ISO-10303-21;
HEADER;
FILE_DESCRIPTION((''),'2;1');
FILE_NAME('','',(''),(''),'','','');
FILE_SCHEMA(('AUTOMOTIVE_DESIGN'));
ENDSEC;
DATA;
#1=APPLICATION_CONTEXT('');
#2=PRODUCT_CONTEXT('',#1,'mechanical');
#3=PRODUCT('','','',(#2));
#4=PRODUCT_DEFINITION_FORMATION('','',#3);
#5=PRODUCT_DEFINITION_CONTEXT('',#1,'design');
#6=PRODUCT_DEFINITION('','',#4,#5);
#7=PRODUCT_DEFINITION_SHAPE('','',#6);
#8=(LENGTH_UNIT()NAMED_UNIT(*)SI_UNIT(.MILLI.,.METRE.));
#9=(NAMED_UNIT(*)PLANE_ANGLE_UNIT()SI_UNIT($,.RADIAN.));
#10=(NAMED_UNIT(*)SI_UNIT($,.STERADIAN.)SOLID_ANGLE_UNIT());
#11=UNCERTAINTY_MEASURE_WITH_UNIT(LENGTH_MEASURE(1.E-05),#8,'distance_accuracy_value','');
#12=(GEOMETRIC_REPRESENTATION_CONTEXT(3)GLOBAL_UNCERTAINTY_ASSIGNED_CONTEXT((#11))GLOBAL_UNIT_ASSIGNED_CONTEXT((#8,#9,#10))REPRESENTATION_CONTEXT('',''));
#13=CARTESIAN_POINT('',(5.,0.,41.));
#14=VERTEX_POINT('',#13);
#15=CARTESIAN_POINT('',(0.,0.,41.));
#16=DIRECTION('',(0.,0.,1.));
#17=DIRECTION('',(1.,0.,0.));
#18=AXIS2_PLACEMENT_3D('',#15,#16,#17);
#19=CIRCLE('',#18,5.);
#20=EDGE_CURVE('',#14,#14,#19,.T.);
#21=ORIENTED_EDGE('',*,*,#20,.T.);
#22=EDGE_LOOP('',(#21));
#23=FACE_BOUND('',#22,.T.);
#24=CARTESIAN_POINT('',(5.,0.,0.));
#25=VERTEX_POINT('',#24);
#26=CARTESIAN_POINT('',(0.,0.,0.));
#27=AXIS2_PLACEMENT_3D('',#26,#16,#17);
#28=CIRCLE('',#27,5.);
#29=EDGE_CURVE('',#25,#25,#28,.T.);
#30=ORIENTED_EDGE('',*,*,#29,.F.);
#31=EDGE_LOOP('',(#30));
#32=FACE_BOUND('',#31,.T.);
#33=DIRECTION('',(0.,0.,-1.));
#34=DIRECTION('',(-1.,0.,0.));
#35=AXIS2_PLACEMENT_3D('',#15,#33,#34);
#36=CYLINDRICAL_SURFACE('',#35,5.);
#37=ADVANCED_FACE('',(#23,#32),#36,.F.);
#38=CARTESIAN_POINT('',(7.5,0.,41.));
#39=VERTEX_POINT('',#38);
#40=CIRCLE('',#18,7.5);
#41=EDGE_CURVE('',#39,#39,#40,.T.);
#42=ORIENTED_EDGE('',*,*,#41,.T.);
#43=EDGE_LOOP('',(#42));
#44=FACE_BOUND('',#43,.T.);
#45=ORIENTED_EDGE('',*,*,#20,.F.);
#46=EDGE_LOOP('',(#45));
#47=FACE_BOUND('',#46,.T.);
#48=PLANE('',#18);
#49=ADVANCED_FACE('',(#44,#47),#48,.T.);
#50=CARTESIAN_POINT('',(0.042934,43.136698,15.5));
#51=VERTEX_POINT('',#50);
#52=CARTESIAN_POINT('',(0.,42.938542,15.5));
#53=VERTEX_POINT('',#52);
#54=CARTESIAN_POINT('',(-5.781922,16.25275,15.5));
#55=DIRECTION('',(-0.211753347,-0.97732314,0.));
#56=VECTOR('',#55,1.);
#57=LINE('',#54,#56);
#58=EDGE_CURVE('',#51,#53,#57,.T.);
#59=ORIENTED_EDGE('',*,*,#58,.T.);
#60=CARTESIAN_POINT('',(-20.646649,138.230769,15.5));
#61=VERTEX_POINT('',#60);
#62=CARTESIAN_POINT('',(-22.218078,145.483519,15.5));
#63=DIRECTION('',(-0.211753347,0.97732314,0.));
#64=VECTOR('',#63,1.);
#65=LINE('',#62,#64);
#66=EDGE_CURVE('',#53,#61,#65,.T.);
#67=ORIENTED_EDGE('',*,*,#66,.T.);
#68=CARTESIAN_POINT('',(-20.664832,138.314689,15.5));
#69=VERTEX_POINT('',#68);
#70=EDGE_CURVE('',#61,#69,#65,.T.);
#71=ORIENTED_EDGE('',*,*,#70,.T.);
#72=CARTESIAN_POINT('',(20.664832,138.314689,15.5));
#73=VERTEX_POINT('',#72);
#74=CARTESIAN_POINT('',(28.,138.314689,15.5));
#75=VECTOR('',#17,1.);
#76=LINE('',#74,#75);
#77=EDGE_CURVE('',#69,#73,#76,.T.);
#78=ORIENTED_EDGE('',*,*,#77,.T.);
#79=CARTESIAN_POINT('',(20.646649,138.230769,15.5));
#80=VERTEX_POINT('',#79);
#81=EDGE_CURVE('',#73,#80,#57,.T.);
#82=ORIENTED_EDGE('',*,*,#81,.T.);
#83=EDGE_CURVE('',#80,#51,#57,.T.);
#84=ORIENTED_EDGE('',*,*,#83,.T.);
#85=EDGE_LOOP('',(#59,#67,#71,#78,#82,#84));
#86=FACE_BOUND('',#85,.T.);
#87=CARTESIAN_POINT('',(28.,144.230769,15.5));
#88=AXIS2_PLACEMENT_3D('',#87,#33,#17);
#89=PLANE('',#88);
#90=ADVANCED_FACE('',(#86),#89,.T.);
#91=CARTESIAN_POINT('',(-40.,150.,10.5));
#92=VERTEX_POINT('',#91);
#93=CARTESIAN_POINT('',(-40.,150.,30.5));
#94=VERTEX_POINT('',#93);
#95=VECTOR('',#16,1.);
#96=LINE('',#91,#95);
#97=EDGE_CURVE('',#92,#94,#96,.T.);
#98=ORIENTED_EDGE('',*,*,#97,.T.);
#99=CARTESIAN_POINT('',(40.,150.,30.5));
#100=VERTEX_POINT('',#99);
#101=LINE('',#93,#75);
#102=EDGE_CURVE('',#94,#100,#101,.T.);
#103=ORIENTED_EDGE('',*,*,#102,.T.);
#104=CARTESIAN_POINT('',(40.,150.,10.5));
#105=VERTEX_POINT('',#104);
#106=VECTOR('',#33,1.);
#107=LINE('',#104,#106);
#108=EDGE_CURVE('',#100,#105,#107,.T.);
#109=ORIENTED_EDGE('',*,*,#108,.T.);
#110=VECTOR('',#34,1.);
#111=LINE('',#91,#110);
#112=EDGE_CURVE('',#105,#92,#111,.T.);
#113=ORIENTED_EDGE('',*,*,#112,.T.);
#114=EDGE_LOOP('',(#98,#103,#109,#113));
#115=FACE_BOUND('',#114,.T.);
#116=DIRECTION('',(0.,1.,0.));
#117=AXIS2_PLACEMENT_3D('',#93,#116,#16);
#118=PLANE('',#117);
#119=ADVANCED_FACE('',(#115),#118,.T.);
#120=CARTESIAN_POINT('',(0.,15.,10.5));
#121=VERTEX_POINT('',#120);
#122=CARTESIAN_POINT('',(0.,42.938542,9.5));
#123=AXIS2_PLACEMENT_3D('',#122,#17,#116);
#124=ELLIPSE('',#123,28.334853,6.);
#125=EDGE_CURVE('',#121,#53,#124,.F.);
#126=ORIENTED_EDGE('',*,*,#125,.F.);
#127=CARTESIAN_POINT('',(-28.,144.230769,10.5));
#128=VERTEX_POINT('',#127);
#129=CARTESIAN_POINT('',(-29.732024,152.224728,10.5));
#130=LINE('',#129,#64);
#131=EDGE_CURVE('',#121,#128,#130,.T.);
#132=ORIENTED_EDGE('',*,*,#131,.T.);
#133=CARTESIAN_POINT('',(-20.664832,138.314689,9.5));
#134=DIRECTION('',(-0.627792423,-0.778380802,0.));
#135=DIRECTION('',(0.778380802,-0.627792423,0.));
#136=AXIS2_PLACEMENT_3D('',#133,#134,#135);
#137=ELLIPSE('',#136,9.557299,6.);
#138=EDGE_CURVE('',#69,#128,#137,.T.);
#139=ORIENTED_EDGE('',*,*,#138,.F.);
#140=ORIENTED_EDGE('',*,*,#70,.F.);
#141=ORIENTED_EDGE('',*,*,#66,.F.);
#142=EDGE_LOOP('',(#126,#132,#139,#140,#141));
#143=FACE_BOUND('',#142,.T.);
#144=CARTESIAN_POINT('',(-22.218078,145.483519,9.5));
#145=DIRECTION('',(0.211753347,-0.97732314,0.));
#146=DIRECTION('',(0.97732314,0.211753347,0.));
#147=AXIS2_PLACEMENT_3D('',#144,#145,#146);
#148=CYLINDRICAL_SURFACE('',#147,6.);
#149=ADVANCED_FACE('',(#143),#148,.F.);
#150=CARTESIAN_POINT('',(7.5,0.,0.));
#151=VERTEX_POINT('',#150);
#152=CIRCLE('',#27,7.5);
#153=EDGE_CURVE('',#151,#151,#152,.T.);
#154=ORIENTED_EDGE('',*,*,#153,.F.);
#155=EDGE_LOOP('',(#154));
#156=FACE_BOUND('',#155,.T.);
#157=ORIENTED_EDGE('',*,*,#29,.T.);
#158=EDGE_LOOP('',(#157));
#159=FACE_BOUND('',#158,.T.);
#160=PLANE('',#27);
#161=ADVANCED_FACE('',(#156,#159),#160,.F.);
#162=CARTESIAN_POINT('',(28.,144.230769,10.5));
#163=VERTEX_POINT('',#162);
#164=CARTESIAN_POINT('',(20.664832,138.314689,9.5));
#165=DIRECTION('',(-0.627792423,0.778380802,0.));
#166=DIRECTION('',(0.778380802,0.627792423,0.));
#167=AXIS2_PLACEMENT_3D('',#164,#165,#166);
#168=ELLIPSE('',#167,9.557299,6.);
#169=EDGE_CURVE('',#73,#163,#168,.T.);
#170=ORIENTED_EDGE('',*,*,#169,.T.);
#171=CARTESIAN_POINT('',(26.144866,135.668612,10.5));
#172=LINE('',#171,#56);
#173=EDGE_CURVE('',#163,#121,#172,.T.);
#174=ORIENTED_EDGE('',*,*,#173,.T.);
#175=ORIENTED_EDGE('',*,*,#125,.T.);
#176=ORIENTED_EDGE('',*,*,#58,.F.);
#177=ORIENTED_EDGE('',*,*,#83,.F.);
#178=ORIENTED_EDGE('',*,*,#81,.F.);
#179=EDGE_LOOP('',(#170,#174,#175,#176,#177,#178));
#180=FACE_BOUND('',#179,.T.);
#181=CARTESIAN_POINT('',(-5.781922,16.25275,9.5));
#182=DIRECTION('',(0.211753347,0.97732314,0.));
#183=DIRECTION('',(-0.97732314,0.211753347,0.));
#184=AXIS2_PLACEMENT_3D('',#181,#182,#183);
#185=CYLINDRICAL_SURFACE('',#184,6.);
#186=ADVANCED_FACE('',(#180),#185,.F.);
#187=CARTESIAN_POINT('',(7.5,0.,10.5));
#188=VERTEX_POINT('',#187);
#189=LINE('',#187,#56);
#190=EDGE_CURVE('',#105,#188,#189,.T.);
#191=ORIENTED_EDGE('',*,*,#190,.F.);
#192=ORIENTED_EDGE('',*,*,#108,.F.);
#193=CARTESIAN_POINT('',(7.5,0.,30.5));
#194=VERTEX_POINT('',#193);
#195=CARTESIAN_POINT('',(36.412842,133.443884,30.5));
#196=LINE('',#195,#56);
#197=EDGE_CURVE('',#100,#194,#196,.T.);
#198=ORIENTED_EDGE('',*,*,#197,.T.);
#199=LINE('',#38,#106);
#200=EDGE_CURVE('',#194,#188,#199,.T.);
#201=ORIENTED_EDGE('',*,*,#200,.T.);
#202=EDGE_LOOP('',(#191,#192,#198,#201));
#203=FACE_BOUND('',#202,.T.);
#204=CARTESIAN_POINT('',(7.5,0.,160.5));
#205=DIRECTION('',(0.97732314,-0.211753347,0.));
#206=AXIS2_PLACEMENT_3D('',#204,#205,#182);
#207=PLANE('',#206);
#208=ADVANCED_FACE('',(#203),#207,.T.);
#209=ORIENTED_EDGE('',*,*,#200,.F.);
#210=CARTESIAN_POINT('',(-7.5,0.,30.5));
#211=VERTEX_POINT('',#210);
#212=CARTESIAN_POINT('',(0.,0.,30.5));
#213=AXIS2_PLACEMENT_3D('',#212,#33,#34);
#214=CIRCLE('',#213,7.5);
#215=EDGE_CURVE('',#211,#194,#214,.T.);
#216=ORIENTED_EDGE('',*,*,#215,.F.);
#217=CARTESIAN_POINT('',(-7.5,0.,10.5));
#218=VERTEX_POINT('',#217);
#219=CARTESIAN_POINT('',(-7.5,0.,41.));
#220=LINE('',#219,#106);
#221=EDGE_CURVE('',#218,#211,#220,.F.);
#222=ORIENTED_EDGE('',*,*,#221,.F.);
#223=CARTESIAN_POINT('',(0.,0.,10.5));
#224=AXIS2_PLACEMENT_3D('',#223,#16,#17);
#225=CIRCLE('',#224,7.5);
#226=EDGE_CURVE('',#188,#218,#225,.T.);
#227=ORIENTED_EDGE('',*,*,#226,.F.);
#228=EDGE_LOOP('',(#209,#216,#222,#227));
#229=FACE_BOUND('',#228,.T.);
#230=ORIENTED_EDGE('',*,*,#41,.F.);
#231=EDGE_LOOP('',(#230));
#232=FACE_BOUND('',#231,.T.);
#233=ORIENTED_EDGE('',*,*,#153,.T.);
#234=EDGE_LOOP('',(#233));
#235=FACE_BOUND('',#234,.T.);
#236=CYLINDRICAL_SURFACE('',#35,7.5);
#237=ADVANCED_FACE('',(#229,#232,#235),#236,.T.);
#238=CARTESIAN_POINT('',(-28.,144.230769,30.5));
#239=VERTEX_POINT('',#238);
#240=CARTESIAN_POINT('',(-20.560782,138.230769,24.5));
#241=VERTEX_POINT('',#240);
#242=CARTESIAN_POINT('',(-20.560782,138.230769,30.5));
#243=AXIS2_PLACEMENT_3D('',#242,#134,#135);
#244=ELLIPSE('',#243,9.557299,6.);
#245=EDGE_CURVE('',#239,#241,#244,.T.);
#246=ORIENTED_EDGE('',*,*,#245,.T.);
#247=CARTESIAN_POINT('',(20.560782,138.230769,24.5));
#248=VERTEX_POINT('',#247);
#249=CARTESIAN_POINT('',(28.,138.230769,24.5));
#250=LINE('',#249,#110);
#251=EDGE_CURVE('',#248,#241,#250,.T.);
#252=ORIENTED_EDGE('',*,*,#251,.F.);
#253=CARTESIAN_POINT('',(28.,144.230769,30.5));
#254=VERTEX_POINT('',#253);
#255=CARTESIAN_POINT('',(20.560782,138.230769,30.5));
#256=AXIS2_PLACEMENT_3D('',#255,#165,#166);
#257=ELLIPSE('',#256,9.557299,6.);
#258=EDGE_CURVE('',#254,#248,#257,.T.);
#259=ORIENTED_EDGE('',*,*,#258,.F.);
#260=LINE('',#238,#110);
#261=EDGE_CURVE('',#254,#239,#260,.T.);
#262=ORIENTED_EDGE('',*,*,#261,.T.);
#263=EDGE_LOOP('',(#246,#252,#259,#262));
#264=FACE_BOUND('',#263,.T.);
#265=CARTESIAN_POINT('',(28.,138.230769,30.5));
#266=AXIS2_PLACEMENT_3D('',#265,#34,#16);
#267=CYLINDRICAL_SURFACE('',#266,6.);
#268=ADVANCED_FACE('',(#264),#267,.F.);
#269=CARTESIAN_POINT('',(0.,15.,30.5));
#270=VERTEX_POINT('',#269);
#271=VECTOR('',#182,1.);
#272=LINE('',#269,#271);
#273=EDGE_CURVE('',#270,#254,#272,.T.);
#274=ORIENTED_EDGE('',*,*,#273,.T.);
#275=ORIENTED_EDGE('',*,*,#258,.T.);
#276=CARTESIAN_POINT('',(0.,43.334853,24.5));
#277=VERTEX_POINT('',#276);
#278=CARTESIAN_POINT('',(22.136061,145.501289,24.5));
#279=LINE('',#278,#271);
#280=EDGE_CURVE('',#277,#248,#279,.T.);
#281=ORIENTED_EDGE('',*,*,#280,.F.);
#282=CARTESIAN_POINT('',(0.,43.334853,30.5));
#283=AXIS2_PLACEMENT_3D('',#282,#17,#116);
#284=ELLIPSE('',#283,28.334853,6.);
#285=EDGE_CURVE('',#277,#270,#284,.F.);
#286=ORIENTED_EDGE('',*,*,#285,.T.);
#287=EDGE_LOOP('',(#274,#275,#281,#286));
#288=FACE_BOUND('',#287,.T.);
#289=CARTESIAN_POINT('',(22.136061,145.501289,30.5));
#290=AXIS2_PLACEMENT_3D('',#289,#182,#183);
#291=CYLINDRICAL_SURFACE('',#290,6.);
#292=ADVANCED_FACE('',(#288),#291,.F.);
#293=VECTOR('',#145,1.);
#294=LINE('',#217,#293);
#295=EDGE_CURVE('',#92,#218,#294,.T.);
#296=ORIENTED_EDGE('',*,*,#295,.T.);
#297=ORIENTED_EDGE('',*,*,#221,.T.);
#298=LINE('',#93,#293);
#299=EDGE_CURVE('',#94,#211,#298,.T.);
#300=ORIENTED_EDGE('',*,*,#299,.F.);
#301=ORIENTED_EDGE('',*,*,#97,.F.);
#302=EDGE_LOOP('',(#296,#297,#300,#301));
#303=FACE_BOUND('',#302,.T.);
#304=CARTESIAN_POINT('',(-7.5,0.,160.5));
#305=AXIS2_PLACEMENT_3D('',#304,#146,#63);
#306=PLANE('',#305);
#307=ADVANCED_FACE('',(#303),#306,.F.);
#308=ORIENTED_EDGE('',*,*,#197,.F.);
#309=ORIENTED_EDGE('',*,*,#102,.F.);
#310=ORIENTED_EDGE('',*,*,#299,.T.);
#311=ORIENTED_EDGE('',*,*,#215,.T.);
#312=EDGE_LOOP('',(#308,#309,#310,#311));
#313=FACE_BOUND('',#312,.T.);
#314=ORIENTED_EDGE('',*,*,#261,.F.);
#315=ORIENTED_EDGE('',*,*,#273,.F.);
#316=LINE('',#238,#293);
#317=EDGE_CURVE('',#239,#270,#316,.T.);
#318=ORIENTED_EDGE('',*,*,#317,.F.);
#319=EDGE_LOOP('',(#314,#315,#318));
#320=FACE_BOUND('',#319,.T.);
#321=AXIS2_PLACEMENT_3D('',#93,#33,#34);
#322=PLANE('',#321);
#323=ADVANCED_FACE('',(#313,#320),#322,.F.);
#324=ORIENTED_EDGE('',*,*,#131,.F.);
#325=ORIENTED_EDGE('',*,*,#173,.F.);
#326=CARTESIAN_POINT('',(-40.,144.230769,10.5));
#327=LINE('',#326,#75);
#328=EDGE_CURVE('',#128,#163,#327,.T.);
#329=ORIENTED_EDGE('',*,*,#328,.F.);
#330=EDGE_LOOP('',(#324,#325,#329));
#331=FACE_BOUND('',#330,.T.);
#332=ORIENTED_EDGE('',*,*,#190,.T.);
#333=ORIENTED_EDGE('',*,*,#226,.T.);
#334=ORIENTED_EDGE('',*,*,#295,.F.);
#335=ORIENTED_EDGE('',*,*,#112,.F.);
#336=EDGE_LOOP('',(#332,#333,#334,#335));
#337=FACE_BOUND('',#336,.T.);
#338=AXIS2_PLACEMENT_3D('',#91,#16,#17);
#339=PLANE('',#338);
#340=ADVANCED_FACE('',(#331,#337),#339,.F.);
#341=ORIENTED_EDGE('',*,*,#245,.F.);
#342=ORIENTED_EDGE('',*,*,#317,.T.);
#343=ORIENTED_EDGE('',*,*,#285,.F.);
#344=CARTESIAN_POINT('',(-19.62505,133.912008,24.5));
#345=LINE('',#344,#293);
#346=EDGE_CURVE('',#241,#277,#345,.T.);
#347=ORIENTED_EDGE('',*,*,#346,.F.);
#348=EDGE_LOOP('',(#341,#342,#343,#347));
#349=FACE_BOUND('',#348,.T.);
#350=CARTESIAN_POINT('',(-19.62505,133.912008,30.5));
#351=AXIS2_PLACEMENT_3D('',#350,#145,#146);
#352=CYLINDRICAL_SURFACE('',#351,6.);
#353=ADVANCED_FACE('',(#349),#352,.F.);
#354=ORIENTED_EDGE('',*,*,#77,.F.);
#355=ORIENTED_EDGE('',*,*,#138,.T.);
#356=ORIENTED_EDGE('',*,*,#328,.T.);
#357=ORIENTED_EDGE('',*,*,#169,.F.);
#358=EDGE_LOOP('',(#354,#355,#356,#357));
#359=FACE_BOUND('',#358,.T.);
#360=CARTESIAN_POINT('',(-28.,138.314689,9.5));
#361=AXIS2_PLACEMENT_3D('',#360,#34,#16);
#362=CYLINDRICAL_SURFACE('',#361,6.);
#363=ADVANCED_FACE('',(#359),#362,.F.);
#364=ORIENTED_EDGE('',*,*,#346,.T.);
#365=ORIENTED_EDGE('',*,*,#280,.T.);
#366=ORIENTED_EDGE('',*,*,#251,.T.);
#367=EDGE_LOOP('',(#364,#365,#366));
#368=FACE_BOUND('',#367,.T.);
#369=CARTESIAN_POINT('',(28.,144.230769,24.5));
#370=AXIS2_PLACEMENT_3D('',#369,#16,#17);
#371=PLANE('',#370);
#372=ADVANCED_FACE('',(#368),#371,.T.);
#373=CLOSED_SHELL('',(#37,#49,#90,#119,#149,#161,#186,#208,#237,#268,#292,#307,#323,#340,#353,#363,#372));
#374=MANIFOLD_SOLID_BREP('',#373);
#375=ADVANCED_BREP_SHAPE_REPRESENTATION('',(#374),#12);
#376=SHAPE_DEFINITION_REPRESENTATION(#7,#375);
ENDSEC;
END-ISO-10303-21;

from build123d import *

# Parameters (mm, degrees)
SKETCH1_R           = 7.5
SKETCH1_R_2         = 5
BOSS_EXTRUDE1_DEPTH = 41
SKETCH2_W           = 80
SKETCH2_H           = 20
BOSS_EXTRUDE2_DEPTH = 150
SKETCH3_R           = 5
CUT_EXTRUDE1_DEPTH  = 150
CUT_EXTRUDE2_DEPTH  = 150
CUT_EXTRUDE3_DEPTH  = 6
FILLET1_R           = 6


with BuildPart() as part:
    # Sketch1 → Boss-Extrude1 (new body)
    with BuildSketch(Plane.XY):
        Circle(SKETCH1_R)
        Circle(SKETCH1_R_2, mode=Mode.SUBTRACT)
    extrude(amount=BOSS_EXTRUDE1_DEPTH)

    # Sketch2 → Boss-Extrude2 (add)
    with BuildSketch(Plane(origin=(0, 0, 0), x_dir=(1, 0, 0), z_dir=(0, 1, 0))):
        with Locations((0, -20.5)):
            Rectangle(SKETCH2_W, SKETCH2_H)
    extrude(amount=BOSS_EXTRUDE2_DEPTH)

    # Sketch3 → Cut-Extrude1 (cut)
    with BuildSketch(Plane(origin=(0, 0, 0), x_dir=(-1, 0, 0), z_dir=(0, 0, -1))):
        with Locations(Location((0, 0, 0), (0, 0, 180))):
            Circle(SKETCH3_R)
    extrude(amount=-CUT_EXTRUDE1_DEPTH, mode=Mode.SUBTRACT)

    # Sketch4 → Cut-Extrude2 (cut)
    with BuildSketch(Plane(origin=(0, 0, 10.5), x_dir=(-1, 0, 0), z_dir=(0, 0, -1))):
        Polygon((7.5, 0), (40, 150), (40, 0), align=None)
    cut_extrude2 = extrude(amount=-CUT_EXTRUDE2_DEPTH, mode=Mode.SUBTRACT)

    # Mirror1: Cut-Extrude2 across plane
    add(cut_extrude2.mirror(Plane(origin=(0, 0, 0), x_dir=(0, 0, 1), z_dir=(1, 0, 0))), mode=Mode.SUBTRACT)

    # Sketch5 → Cut-Extrude3 (cut)
    with BuildSketch(Plane.XY.offset(30.5)):
        Polygon((-28, 144.230769231), (0, 15), (28, 144.230769231), align=None)
    cut_extrude3 = extrude(amount=-CUT_EXTRUDE3_DEPTH, mode=Mode.SUBTRACT)

    # Mirror2: Cut-Extrude3 across plane
    add(cut_extrude3.mirror(Plane.XY.offset(20)), mode=Mode.SUBTRACT)

    # Fillet1
    # the kernel refuses this fillet: 6 mm, written as the material it adds along each edge
    with BuildSketch(Plane(origin=(-3.176300205, 0.3401529, 24.5), x_dir=(0, 0, 1), z_dir=(0.21175334700580606, 0.9773231400267973, 0))) as fillet1_piece_1_section:
        with BuildLine():
            CenterArc((FILLET1_R, -FILLET1_R), FILLET1_R, 90, 90)
            Line((0, -FILLET1_R), (0, 0))
            Line((0, 0), (FILLET1_R, 0))
        make_face()
    fillet1_piece_1 = extrude(amount=162.229314889, mode=Mode.PRIVATE)
    fillet1_piece_1 = split(fillet1_piece_1, bisect_by=Plane(origin=(-13.111456884, 75.514416388, 25.854154081), z_dir=(0.9773231400267973, 0.21175334700580611, 0)), keep=Keep.TOP, mode=Mode.PRIVATE)
    fillet1_piece_1 = split(fillet1_piece_1, bisect_by=Plane(origin=(12.989714393, 144.230769231, 25.854154081), z_dir=(0, -1, 0)), keep=Keep.TOP, mode=Mode.PRIVATE)
    add(fillet1_piece_1)
    with BuildSketch(Plane(origin=(-31.176300205, 158.890616331, 24.5), x_dir=(0, 0, 1), z_dir=(0.21175334700580611, -0.9773231400267973, 0))) as fillet1_piece_2_section:
        with BuildLine():
            CenterArc((FILLET1_R, -FILLET1_R), FILLET1_R, 90, 90)
            Line((0, -FILLET1_R), (0, 0))
            Line((0, 0), (FILLET1_R, 0))
        make_face()
    fillet1_piece_2 = extrude(amount=162.229314889, mode=Mode.PRIVATE)
    fillet1_piece_2 = split(fillet1_piece_2, bisect_by=Plane(origin=(13.111456884, 75.514416388, 25.854154081), z_dir=(-0.9773231400267973, 0.21175334700580606, 0)), keep=Keep.TOP, mode=Mode.PRIVATE)
    fillet1_piece_2 = split(fillet1_piece_2, bisect_by=Plane(origin=(-12.989714393, 144.230769231, 25.854154081), z_dir=(0, -1, 0)), keep=Keep.TOP, mode=Mode.PRIVATE)
    add(fillet1_piece_2)
    with BuildSketch(Plane(origin=(43, 144.230769231, 24.5), x_dir=(0, 0, 1), z_dir=(-1, 0, 0))) as fillet1_piece_3_section:
        with BuildLine():
            CenterArc((FILLET1_R, -FILLET1_R), FILLET1_R, 90, 90)
            Line((0, -FILLET1_R), (0, 0))
            Line((0, 0), (FILLET1_R, 0))
        make_face()
    fillet1_piece_3 = extrude(amount=86, mode=Mode.PRIVATE)
    fillet1_piece_3 = split(fillet1_piece_3, bisect_by=Plane(origin=(-26.469184818, 137.165468391, 25.846029793), z_dir=(0.9773231400267973, 0.21175334700580611, 0)), keep=Keep.TOP, mode=Mode.PRIVATE)
    fillet1_piece_3 = split(fillet1_piece_3, bisect_by=Plane(origin=(26.469184818, 137.165468391, 25.846029793), z_dir=(-0.9773231400267973, 0.21175334700580606, 0)), keep=Keep.TOP, mode=Mode.PRIVATE)
    add(fillet1_piece_3)
    with BuildSketch(Plane(origin=(-3.131874238, 0.545195824, 15.5), x_dir=(0, 0, -1), z_dir=(0.21175334700580606, 0.9773231400267973, 0))) as fillet1_piece_4_section:
        with BuildLine():
            CenterArc((6, 5.916079783), FILLET1_R, 180, 80.405931773)
            Line((0, 5.916079783), (0, 0))
            Line((0, 0), (5, 0))
        make_face()
    fillet1_piece_4 = extrude(amount=161.809713804, mode=Mode.PRIVATE)
    fillet1_piece_4 = split(fillet1_piece_4, bisect_by=Plane(origin=(12.010804887, 144.230769231, 14.091740846), z_dir=(0, -1, 0)), keep=Keep.TOP, mode=Mode.PRIVATE)
    fillet1_piece_4 = split(fillet1_piece_4, bisect_by=Plane(origin=(-12.92288351, 74.644077737, 14.091740846), z_dir=(0.9773231400267973, 0.21175334700580611, 0)), keep=Keep.TOP, mode=Mode.PRIVATE)
    add(fillet1_piece_4)
    with BuildSketch(Plane(origin=(-31.131874238, 158.685573406, 15.5), x_dir=(0, 0, -1), z_dir=(0.21175334700580611, -0.9773231400267973, 0))) as fillet1_piece_5_section:
        with BuildLine():
            CenterArc((6, 5.916079783), FILLET1_R, 180, 80.405931773)
            Line((0, 5.916079783), (0, 0))
            Line((0, 0), (5, 0))
        make_face()
    fillet1_piece_5 = extrude(amount=161.809713804, mode=Mode.PRIVATE)
    fillet1_piece_5 = split(fillet1_piece_5, bisect_by=Plane(origin=(-12.010804887, 144.230769231, 14.091740846), z_dir=(0, -1, 0)), keep=Keep.TOP, mode=Mode.PRIVATE)
    fillet1_piece_5 = split(fillet1_piece_5, bisect_by=Plane(origin=(12.92288351, 74.644077737, 14.091740846), z_dir=(-0.9773231400267973, 0.21175334700580606, 0)), keep=Keep.TOP, mode=Mode.PRIVATE)
    add(fillet1_piece_5)
    with BuildSketch(Plane(origin=(42.790199458, 144.230769231, 15.5), x_dir=(0, 0, -1), z_dir=(-1, 0, 0))) as fillet1_piece_6_section:
        with BuildLine():
            CenterArc((6, 5.916079783), FILLET1_R, 180, 80.405931773)
            Line((0, 5.916079783), (0, 0))
            Line((0, 0), (5, 0))
        make_face()
    fillet1_piece_6 = extrude(amount=85.580398916, mode=Mode.PRIVATE)
    fillet1_piece_6 = split(fillet1_piece_6, bisect_by=Plane(origin=(26.323275838, 136.492042329, 14.091740846), z_dir=(-0.9773231400267973, 0.21175334700580606, 0)), keep=Keep.TOP, mode=Mode.PRIVATE)
    fillet1_piece_6 = split(fillet1_piece_6, bisect_by=Plane(origin=(-26.323275838, 136.492042329, 14.091740846), z_dir=(0.9773231400267973, 0.21175334700580611, 0)), keep=Keep.TOP, mode=Mode.PRIVATE)
    add(fillet1_piece_6)


solid = part.part
